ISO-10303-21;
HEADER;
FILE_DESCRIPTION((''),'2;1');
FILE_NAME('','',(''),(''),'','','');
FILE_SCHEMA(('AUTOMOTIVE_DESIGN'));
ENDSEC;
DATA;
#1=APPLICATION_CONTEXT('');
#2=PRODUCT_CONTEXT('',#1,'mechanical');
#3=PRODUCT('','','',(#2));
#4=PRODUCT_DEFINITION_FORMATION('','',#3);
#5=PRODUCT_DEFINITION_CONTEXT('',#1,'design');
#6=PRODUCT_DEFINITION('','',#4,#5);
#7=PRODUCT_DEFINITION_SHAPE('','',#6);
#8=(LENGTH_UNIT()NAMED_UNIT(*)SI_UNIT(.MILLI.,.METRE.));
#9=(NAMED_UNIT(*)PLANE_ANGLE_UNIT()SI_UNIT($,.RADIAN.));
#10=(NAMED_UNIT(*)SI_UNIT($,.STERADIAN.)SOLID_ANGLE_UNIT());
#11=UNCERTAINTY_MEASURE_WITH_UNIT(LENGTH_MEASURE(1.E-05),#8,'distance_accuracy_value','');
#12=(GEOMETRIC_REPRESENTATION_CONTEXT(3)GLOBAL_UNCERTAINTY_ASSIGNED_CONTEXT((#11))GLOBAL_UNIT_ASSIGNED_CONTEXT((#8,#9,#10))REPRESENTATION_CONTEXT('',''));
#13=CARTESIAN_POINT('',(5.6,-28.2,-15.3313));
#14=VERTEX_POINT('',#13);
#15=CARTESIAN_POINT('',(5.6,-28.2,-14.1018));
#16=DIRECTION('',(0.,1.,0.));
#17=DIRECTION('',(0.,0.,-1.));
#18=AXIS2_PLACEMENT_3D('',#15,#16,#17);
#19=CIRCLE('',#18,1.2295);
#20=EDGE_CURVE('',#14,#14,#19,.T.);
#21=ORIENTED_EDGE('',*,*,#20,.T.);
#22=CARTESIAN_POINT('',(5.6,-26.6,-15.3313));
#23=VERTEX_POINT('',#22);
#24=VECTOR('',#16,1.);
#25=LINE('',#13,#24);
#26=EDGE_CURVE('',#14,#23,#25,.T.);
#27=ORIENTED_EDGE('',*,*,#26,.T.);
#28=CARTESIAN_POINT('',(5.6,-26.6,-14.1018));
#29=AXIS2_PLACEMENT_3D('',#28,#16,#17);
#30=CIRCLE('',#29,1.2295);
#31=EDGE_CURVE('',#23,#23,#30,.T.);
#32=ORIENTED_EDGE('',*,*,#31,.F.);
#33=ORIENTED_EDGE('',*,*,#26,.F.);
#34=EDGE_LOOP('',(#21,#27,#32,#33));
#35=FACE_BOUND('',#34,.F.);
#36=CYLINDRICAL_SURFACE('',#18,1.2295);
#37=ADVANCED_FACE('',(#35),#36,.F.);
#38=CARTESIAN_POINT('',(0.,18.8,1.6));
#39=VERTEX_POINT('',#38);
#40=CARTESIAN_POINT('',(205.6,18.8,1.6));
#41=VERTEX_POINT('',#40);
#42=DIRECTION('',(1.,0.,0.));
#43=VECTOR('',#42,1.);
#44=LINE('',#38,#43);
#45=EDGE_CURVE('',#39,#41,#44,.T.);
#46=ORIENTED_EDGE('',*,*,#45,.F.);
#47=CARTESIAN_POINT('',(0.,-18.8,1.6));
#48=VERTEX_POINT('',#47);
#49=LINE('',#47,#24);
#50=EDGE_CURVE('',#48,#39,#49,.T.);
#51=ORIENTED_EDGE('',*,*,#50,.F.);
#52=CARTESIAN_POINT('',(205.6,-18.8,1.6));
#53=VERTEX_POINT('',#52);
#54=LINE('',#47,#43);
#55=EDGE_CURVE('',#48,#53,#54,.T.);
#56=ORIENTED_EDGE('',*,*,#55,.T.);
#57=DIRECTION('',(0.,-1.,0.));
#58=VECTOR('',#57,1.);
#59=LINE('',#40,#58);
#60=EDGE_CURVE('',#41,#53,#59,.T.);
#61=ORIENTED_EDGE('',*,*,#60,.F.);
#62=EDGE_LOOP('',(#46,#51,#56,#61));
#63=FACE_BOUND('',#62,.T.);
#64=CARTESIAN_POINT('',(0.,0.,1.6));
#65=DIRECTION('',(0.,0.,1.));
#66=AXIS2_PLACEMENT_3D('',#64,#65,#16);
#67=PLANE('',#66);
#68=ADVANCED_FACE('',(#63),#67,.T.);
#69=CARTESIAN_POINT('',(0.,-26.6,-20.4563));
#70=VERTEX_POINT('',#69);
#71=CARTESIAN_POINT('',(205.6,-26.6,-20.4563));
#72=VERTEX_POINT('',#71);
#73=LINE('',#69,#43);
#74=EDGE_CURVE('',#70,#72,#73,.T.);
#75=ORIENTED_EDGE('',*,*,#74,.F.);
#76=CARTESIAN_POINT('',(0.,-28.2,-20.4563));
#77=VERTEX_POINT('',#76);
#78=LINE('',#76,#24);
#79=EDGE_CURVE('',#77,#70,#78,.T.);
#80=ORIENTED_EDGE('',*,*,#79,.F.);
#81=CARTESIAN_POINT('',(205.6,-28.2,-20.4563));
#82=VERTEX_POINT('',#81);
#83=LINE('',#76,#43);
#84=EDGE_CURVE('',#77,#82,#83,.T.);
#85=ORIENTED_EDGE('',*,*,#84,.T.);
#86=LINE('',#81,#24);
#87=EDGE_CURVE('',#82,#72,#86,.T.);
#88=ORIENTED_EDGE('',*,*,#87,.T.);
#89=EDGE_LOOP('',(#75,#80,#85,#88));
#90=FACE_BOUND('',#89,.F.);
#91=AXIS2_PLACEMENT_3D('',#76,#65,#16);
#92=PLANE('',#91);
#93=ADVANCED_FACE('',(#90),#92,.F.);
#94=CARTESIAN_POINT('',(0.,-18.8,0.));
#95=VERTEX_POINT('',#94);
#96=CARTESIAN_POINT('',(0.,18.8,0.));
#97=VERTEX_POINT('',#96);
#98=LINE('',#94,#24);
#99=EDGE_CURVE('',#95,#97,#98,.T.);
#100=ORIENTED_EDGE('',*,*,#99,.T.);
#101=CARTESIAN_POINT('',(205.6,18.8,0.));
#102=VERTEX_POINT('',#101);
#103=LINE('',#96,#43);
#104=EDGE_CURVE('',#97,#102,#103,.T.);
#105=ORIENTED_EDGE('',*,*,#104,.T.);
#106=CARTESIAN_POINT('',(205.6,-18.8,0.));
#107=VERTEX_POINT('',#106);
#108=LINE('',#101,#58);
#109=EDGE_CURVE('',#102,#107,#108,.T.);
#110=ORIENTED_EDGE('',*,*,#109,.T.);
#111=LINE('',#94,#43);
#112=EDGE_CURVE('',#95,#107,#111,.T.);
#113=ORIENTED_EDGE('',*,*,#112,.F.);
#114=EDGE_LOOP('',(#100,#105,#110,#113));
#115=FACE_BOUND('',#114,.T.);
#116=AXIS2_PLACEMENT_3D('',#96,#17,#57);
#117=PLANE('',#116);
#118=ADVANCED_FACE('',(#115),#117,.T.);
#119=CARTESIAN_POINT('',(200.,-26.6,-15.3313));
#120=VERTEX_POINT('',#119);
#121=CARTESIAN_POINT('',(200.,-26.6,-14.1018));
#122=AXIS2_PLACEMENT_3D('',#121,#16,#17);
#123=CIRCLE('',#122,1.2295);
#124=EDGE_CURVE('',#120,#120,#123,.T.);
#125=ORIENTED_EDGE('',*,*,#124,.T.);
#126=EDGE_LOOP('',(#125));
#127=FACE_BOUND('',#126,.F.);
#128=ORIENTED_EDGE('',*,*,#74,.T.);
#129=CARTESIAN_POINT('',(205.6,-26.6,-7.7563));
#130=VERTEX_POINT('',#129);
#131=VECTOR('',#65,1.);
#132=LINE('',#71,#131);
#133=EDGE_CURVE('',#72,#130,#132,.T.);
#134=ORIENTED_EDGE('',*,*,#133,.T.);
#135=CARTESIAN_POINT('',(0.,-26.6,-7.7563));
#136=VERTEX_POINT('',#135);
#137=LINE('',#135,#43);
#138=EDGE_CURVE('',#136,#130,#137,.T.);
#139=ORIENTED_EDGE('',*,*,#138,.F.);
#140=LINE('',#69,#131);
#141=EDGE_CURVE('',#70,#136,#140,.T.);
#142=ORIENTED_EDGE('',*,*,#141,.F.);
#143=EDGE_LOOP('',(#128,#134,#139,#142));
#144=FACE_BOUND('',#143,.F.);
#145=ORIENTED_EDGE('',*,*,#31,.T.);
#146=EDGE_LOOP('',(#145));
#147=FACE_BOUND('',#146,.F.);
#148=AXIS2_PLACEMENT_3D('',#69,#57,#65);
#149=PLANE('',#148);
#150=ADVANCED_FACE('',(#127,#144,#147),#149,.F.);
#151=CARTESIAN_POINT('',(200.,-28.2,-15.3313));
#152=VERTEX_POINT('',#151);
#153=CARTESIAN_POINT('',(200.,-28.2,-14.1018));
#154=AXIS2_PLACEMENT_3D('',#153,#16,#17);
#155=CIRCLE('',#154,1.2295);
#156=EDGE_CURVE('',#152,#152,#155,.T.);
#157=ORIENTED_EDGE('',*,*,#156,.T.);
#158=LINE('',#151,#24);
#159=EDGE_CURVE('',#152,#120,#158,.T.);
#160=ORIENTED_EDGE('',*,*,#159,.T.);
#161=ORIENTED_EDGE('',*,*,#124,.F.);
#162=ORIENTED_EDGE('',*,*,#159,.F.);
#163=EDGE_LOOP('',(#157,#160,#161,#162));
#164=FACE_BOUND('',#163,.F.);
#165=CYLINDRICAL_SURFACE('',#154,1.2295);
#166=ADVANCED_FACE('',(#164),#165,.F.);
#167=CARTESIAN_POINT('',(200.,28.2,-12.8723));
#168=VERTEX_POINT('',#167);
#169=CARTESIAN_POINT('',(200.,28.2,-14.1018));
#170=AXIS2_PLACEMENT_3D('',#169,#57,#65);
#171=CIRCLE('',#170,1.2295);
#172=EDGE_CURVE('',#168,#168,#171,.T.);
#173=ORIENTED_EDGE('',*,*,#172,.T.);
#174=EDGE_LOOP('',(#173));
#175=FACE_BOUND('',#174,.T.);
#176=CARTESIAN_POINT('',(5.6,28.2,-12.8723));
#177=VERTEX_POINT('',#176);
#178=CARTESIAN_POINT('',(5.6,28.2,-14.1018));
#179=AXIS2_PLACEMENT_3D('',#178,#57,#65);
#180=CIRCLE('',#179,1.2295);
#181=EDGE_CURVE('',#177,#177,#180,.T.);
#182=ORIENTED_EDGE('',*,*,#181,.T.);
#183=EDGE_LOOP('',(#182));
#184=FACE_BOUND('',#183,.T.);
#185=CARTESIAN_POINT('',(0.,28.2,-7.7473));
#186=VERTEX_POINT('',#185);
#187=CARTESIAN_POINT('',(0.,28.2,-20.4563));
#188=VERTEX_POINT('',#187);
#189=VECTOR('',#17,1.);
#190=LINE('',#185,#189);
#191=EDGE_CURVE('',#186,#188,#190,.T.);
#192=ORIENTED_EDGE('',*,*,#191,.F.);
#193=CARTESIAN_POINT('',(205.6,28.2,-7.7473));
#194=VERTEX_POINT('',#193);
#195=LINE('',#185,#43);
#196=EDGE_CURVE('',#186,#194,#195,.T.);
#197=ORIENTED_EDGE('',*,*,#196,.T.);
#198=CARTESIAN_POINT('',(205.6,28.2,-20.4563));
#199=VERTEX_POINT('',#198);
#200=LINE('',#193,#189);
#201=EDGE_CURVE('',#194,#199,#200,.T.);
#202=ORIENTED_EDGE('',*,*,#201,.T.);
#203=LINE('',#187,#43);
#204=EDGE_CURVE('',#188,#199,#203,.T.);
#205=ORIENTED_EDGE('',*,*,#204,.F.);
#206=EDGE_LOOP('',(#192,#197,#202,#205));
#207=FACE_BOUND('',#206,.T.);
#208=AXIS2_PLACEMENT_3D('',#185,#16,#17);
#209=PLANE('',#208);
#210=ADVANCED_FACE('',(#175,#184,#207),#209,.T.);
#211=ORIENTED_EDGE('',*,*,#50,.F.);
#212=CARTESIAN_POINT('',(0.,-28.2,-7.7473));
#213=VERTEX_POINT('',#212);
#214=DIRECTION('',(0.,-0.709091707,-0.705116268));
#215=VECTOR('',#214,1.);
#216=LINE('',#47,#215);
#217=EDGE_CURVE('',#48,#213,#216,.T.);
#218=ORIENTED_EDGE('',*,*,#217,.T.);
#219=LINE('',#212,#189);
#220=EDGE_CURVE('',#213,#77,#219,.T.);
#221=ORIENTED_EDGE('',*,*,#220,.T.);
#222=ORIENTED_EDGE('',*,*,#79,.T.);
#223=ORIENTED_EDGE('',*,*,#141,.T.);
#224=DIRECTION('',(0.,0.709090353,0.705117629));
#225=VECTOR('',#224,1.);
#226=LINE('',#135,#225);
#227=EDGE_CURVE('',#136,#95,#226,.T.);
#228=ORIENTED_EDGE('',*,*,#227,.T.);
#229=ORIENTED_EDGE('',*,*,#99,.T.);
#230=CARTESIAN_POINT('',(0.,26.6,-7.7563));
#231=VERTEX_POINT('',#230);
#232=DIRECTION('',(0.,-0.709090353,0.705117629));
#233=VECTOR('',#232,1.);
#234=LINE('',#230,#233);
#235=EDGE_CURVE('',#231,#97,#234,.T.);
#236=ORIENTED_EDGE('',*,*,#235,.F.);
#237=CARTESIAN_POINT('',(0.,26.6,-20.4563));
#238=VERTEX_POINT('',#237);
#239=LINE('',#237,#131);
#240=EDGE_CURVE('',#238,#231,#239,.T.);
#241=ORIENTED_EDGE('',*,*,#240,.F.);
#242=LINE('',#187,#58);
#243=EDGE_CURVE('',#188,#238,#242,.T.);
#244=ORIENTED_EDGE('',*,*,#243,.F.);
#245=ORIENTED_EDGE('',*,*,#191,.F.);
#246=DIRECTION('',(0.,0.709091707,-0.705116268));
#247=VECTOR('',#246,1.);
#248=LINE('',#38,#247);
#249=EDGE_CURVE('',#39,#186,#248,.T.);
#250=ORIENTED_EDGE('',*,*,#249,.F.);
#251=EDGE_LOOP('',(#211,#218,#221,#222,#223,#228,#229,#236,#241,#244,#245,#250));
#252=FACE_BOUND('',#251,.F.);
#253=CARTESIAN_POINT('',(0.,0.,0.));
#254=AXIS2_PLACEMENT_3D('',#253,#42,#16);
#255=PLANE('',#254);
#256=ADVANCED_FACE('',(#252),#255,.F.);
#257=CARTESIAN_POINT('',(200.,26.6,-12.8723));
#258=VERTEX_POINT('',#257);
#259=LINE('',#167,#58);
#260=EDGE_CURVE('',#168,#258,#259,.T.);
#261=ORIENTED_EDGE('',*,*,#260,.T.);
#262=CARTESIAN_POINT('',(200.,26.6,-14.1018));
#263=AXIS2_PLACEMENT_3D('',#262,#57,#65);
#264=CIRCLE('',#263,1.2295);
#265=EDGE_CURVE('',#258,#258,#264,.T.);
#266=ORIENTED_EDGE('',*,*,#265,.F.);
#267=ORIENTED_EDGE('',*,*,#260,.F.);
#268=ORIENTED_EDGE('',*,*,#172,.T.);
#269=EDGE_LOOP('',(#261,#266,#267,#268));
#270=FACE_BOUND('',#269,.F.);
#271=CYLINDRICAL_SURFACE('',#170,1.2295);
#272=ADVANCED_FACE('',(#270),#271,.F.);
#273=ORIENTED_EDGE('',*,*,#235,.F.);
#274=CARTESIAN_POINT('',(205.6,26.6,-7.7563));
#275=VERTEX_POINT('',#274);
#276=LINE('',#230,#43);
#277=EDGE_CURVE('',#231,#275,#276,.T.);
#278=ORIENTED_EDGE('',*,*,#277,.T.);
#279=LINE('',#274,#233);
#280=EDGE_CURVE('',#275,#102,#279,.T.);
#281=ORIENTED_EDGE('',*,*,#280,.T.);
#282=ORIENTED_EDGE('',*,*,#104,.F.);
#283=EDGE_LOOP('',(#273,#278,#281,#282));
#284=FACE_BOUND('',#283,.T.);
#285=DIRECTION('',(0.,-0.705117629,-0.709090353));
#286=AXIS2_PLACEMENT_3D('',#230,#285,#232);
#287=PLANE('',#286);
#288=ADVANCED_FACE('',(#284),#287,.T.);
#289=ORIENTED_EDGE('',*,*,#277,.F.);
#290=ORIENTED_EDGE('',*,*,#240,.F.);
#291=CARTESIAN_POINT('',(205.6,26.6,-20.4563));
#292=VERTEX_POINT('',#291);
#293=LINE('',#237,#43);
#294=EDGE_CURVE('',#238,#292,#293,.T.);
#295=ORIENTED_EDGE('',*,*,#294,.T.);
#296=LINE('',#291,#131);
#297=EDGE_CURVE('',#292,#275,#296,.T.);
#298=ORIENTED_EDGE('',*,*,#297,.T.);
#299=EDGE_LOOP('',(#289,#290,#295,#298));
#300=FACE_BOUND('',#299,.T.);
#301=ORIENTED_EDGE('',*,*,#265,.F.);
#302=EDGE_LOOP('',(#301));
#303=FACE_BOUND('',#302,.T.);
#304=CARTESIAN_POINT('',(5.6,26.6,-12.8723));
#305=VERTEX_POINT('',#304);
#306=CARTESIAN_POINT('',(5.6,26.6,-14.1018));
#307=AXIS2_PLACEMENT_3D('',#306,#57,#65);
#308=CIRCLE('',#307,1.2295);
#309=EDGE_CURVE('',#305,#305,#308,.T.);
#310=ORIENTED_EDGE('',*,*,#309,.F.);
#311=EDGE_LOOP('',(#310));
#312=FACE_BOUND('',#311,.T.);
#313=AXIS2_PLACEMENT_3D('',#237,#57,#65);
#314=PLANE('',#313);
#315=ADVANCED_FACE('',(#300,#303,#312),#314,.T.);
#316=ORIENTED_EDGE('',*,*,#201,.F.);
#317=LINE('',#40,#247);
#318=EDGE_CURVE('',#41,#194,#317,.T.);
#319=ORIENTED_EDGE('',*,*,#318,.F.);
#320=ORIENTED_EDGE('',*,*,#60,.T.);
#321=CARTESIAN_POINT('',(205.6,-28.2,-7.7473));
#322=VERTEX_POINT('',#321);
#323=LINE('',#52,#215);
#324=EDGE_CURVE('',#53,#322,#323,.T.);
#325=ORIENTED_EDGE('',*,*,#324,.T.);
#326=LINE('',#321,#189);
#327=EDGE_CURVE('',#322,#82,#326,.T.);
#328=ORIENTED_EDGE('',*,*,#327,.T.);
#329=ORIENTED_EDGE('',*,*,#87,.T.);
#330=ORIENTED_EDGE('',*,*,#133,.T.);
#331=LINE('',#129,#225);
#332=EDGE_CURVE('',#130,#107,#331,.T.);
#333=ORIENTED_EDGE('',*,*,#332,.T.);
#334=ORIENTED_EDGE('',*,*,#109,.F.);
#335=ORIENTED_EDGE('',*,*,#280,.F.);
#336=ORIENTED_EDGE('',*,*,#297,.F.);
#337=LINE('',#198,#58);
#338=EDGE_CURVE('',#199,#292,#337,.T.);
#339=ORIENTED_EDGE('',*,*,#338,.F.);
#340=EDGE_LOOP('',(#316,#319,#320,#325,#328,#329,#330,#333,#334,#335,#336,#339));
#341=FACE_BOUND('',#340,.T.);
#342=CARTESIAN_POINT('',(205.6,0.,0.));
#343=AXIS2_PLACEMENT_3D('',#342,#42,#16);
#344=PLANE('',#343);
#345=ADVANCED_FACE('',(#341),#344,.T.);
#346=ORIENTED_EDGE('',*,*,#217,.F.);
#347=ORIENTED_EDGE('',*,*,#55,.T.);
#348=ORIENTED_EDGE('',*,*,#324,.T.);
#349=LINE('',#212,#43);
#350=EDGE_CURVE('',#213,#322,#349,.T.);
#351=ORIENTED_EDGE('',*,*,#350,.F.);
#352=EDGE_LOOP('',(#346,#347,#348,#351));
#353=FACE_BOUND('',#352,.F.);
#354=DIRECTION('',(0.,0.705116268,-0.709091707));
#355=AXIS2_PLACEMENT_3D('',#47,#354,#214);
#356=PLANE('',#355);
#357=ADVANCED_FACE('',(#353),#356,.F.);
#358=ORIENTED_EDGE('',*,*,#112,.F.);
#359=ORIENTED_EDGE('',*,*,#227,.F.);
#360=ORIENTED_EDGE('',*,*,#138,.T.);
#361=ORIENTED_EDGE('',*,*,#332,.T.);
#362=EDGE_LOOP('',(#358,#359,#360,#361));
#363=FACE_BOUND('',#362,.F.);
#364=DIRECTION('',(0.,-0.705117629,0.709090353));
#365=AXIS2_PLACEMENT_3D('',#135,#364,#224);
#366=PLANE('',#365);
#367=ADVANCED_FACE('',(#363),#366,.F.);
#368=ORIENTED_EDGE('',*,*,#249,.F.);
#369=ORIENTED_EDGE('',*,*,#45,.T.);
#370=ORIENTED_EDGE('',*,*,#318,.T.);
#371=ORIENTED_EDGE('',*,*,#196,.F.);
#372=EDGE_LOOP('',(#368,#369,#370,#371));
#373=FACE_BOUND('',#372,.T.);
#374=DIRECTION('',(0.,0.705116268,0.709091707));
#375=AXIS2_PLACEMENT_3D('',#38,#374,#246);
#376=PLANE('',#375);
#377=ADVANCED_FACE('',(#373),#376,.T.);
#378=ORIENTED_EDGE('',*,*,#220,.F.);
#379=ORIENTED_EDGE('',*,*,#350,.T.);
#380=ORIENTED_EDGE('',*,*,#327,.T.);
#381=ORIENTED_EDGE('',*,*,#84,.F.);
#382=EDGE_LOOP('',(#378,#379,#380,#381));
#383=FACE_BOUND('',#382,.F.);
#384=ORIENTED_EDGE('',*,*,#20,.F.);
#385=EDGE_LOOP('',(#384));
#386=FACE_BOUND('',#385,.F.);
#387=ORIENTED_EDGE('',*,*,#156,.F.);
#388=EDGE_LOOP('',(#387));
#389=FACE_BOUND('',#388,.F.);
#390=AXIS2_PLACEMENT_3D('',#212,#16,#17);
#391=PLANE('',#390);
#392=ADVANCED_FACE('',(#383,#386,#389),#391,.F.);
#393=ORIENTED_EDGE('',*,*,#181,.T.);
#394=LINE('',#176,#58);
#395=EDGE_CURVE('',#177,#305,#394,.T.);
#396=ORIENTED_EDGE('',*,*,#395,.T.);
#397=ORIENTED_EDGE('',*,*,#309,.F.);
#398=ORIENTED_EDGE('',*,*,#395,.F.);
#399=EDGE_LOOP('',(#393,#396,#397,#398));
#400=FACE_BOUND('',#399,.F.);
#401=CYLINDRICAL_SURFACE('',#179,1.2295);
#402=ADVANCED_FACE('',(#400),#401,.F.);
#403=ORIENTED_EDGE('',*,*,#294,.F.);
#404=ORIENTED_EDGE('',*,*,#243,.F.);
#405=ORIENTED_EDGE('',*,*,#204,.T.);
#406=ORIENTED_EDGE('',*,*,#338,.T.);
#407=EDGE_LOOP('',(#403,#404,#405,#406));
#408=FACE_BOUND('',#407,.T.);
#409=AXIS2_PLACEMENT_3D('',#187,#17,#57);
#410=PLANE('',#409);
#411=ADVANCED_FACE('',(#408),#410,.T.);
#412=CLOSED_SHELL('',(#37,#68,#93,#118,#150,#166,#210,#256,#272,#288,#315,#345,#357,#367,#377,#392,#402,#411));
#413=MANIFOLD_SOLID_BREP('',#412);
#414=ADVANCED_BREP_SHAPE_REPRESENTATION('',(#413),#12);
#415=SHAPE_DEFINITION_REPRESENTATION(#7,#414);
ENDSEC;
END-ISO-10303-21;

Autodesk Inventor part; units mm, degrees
ref_plane "YZ Plane" through (0, 0, 0) normal (1, 0, 0) x (0, 1, 0)
ref_plane "XZ Plane" through (0, 0, 0) normal (0, 1, 0) x (-1, 0, 0)
ref_plane "XY Plane" through (0, 0, 0) normal (0, 0, 1) x (1, 0, 0)
sketch "Sketch1" plane through (0, 0, 0) normal (1, 0, 0) x (0, 1, 0)
  line L0 (18.8, 0) -> (-18.8, 0)
  line L1 (-18.8, 0) -> (-18.8, 1.6)
  line L2 (-18.8, 1.6) -> (18.8, 1.6)
  line L3 (18.8, 1.6) -> (18.8, 0)
  line L4 (18.8, 1.6) -> (28.2, -7.7473)
  line L5 (28.2, -7.7473) -> (28.2, -20.4563)
  line L6 (28.2, -20.4563) -> (26.6, -20.4563)
  line L7 (26.6, -20.4563) -> (26.6, -7.7563)
  line L8 (26.6, -7.7563) -> (18.8, 0)
  line L9 (0, 0) -> (0, 1.6)
  line L10 (-18.8, 1.6) -> (-28.2, -7.7473)
  line L11 (-28.2, -7.7473) -> (-28.2, -20.4563)
  line L12 (-26.6, -20.4563) -> (-26.6, -7.7563)
  line L13 (-26.6, -7.7563) -> (-18.8, 0)
  line L14 (-28.2, -20.4563) -> (-26.6, -20.4563)
  dimension "d0" = 1.6
  dimension "d1" = 1.6
  dimension "d3" = 11
  dimension "d4" = 12.7
  dimension "d5" = 56.4
  dimension "d8" = 7.8
extrude "Extrusion1" add sketch "Sketch1" along normal blind 205.6
sketch "Sketch2" plane through (0, 28.2, -7.7473) normal (0, 1, 0) x (1, 0, 0)
  line L0 (0, 12.709) -> (0, 0) projected
  line L1 (0, 0) -> (205.6, 0) projected
  line L2 (205.6, 12.709) -> (205.6, 0) projected
  line L3 (0, 12.709) -> (205.6, 12.709) projected
  point P0 (0, -7.7473)
  point P1 (5.6, 6.3545)
  point P2 (200, 6.3545)
  point P3 (0, 6.3545)
  point P4 (205.6, 6.3545)
  dimension "d11" = 5.6
  dimension "d12" = 5.6
hole "Hole1" at (5.6, 28.2, -14.1018) at (200, 28.2, -14.1018) direction (0, -1, 0) diameter 2.459 end up to surface
sketch "Sketch3" plane through (0, -28.2, -20.4563) normal (0, -1, 0) x (1, 0, 0)
  circle A0 centre (200, 6.3545) radius 1.2295 projected
  circle A1 centre (5.6, 6.3545) radius 1.2295 projected
  point P0 (0, 20.4563)
hole "Hole2" at (200, -28.2, -14.1018) at (5.6, -28.2, -14.1018) direction (0, 1, 0) diameter 2.459 end up to surface
equation "\"d12\" = d11"
properties part number "ChassisMainBracket"
